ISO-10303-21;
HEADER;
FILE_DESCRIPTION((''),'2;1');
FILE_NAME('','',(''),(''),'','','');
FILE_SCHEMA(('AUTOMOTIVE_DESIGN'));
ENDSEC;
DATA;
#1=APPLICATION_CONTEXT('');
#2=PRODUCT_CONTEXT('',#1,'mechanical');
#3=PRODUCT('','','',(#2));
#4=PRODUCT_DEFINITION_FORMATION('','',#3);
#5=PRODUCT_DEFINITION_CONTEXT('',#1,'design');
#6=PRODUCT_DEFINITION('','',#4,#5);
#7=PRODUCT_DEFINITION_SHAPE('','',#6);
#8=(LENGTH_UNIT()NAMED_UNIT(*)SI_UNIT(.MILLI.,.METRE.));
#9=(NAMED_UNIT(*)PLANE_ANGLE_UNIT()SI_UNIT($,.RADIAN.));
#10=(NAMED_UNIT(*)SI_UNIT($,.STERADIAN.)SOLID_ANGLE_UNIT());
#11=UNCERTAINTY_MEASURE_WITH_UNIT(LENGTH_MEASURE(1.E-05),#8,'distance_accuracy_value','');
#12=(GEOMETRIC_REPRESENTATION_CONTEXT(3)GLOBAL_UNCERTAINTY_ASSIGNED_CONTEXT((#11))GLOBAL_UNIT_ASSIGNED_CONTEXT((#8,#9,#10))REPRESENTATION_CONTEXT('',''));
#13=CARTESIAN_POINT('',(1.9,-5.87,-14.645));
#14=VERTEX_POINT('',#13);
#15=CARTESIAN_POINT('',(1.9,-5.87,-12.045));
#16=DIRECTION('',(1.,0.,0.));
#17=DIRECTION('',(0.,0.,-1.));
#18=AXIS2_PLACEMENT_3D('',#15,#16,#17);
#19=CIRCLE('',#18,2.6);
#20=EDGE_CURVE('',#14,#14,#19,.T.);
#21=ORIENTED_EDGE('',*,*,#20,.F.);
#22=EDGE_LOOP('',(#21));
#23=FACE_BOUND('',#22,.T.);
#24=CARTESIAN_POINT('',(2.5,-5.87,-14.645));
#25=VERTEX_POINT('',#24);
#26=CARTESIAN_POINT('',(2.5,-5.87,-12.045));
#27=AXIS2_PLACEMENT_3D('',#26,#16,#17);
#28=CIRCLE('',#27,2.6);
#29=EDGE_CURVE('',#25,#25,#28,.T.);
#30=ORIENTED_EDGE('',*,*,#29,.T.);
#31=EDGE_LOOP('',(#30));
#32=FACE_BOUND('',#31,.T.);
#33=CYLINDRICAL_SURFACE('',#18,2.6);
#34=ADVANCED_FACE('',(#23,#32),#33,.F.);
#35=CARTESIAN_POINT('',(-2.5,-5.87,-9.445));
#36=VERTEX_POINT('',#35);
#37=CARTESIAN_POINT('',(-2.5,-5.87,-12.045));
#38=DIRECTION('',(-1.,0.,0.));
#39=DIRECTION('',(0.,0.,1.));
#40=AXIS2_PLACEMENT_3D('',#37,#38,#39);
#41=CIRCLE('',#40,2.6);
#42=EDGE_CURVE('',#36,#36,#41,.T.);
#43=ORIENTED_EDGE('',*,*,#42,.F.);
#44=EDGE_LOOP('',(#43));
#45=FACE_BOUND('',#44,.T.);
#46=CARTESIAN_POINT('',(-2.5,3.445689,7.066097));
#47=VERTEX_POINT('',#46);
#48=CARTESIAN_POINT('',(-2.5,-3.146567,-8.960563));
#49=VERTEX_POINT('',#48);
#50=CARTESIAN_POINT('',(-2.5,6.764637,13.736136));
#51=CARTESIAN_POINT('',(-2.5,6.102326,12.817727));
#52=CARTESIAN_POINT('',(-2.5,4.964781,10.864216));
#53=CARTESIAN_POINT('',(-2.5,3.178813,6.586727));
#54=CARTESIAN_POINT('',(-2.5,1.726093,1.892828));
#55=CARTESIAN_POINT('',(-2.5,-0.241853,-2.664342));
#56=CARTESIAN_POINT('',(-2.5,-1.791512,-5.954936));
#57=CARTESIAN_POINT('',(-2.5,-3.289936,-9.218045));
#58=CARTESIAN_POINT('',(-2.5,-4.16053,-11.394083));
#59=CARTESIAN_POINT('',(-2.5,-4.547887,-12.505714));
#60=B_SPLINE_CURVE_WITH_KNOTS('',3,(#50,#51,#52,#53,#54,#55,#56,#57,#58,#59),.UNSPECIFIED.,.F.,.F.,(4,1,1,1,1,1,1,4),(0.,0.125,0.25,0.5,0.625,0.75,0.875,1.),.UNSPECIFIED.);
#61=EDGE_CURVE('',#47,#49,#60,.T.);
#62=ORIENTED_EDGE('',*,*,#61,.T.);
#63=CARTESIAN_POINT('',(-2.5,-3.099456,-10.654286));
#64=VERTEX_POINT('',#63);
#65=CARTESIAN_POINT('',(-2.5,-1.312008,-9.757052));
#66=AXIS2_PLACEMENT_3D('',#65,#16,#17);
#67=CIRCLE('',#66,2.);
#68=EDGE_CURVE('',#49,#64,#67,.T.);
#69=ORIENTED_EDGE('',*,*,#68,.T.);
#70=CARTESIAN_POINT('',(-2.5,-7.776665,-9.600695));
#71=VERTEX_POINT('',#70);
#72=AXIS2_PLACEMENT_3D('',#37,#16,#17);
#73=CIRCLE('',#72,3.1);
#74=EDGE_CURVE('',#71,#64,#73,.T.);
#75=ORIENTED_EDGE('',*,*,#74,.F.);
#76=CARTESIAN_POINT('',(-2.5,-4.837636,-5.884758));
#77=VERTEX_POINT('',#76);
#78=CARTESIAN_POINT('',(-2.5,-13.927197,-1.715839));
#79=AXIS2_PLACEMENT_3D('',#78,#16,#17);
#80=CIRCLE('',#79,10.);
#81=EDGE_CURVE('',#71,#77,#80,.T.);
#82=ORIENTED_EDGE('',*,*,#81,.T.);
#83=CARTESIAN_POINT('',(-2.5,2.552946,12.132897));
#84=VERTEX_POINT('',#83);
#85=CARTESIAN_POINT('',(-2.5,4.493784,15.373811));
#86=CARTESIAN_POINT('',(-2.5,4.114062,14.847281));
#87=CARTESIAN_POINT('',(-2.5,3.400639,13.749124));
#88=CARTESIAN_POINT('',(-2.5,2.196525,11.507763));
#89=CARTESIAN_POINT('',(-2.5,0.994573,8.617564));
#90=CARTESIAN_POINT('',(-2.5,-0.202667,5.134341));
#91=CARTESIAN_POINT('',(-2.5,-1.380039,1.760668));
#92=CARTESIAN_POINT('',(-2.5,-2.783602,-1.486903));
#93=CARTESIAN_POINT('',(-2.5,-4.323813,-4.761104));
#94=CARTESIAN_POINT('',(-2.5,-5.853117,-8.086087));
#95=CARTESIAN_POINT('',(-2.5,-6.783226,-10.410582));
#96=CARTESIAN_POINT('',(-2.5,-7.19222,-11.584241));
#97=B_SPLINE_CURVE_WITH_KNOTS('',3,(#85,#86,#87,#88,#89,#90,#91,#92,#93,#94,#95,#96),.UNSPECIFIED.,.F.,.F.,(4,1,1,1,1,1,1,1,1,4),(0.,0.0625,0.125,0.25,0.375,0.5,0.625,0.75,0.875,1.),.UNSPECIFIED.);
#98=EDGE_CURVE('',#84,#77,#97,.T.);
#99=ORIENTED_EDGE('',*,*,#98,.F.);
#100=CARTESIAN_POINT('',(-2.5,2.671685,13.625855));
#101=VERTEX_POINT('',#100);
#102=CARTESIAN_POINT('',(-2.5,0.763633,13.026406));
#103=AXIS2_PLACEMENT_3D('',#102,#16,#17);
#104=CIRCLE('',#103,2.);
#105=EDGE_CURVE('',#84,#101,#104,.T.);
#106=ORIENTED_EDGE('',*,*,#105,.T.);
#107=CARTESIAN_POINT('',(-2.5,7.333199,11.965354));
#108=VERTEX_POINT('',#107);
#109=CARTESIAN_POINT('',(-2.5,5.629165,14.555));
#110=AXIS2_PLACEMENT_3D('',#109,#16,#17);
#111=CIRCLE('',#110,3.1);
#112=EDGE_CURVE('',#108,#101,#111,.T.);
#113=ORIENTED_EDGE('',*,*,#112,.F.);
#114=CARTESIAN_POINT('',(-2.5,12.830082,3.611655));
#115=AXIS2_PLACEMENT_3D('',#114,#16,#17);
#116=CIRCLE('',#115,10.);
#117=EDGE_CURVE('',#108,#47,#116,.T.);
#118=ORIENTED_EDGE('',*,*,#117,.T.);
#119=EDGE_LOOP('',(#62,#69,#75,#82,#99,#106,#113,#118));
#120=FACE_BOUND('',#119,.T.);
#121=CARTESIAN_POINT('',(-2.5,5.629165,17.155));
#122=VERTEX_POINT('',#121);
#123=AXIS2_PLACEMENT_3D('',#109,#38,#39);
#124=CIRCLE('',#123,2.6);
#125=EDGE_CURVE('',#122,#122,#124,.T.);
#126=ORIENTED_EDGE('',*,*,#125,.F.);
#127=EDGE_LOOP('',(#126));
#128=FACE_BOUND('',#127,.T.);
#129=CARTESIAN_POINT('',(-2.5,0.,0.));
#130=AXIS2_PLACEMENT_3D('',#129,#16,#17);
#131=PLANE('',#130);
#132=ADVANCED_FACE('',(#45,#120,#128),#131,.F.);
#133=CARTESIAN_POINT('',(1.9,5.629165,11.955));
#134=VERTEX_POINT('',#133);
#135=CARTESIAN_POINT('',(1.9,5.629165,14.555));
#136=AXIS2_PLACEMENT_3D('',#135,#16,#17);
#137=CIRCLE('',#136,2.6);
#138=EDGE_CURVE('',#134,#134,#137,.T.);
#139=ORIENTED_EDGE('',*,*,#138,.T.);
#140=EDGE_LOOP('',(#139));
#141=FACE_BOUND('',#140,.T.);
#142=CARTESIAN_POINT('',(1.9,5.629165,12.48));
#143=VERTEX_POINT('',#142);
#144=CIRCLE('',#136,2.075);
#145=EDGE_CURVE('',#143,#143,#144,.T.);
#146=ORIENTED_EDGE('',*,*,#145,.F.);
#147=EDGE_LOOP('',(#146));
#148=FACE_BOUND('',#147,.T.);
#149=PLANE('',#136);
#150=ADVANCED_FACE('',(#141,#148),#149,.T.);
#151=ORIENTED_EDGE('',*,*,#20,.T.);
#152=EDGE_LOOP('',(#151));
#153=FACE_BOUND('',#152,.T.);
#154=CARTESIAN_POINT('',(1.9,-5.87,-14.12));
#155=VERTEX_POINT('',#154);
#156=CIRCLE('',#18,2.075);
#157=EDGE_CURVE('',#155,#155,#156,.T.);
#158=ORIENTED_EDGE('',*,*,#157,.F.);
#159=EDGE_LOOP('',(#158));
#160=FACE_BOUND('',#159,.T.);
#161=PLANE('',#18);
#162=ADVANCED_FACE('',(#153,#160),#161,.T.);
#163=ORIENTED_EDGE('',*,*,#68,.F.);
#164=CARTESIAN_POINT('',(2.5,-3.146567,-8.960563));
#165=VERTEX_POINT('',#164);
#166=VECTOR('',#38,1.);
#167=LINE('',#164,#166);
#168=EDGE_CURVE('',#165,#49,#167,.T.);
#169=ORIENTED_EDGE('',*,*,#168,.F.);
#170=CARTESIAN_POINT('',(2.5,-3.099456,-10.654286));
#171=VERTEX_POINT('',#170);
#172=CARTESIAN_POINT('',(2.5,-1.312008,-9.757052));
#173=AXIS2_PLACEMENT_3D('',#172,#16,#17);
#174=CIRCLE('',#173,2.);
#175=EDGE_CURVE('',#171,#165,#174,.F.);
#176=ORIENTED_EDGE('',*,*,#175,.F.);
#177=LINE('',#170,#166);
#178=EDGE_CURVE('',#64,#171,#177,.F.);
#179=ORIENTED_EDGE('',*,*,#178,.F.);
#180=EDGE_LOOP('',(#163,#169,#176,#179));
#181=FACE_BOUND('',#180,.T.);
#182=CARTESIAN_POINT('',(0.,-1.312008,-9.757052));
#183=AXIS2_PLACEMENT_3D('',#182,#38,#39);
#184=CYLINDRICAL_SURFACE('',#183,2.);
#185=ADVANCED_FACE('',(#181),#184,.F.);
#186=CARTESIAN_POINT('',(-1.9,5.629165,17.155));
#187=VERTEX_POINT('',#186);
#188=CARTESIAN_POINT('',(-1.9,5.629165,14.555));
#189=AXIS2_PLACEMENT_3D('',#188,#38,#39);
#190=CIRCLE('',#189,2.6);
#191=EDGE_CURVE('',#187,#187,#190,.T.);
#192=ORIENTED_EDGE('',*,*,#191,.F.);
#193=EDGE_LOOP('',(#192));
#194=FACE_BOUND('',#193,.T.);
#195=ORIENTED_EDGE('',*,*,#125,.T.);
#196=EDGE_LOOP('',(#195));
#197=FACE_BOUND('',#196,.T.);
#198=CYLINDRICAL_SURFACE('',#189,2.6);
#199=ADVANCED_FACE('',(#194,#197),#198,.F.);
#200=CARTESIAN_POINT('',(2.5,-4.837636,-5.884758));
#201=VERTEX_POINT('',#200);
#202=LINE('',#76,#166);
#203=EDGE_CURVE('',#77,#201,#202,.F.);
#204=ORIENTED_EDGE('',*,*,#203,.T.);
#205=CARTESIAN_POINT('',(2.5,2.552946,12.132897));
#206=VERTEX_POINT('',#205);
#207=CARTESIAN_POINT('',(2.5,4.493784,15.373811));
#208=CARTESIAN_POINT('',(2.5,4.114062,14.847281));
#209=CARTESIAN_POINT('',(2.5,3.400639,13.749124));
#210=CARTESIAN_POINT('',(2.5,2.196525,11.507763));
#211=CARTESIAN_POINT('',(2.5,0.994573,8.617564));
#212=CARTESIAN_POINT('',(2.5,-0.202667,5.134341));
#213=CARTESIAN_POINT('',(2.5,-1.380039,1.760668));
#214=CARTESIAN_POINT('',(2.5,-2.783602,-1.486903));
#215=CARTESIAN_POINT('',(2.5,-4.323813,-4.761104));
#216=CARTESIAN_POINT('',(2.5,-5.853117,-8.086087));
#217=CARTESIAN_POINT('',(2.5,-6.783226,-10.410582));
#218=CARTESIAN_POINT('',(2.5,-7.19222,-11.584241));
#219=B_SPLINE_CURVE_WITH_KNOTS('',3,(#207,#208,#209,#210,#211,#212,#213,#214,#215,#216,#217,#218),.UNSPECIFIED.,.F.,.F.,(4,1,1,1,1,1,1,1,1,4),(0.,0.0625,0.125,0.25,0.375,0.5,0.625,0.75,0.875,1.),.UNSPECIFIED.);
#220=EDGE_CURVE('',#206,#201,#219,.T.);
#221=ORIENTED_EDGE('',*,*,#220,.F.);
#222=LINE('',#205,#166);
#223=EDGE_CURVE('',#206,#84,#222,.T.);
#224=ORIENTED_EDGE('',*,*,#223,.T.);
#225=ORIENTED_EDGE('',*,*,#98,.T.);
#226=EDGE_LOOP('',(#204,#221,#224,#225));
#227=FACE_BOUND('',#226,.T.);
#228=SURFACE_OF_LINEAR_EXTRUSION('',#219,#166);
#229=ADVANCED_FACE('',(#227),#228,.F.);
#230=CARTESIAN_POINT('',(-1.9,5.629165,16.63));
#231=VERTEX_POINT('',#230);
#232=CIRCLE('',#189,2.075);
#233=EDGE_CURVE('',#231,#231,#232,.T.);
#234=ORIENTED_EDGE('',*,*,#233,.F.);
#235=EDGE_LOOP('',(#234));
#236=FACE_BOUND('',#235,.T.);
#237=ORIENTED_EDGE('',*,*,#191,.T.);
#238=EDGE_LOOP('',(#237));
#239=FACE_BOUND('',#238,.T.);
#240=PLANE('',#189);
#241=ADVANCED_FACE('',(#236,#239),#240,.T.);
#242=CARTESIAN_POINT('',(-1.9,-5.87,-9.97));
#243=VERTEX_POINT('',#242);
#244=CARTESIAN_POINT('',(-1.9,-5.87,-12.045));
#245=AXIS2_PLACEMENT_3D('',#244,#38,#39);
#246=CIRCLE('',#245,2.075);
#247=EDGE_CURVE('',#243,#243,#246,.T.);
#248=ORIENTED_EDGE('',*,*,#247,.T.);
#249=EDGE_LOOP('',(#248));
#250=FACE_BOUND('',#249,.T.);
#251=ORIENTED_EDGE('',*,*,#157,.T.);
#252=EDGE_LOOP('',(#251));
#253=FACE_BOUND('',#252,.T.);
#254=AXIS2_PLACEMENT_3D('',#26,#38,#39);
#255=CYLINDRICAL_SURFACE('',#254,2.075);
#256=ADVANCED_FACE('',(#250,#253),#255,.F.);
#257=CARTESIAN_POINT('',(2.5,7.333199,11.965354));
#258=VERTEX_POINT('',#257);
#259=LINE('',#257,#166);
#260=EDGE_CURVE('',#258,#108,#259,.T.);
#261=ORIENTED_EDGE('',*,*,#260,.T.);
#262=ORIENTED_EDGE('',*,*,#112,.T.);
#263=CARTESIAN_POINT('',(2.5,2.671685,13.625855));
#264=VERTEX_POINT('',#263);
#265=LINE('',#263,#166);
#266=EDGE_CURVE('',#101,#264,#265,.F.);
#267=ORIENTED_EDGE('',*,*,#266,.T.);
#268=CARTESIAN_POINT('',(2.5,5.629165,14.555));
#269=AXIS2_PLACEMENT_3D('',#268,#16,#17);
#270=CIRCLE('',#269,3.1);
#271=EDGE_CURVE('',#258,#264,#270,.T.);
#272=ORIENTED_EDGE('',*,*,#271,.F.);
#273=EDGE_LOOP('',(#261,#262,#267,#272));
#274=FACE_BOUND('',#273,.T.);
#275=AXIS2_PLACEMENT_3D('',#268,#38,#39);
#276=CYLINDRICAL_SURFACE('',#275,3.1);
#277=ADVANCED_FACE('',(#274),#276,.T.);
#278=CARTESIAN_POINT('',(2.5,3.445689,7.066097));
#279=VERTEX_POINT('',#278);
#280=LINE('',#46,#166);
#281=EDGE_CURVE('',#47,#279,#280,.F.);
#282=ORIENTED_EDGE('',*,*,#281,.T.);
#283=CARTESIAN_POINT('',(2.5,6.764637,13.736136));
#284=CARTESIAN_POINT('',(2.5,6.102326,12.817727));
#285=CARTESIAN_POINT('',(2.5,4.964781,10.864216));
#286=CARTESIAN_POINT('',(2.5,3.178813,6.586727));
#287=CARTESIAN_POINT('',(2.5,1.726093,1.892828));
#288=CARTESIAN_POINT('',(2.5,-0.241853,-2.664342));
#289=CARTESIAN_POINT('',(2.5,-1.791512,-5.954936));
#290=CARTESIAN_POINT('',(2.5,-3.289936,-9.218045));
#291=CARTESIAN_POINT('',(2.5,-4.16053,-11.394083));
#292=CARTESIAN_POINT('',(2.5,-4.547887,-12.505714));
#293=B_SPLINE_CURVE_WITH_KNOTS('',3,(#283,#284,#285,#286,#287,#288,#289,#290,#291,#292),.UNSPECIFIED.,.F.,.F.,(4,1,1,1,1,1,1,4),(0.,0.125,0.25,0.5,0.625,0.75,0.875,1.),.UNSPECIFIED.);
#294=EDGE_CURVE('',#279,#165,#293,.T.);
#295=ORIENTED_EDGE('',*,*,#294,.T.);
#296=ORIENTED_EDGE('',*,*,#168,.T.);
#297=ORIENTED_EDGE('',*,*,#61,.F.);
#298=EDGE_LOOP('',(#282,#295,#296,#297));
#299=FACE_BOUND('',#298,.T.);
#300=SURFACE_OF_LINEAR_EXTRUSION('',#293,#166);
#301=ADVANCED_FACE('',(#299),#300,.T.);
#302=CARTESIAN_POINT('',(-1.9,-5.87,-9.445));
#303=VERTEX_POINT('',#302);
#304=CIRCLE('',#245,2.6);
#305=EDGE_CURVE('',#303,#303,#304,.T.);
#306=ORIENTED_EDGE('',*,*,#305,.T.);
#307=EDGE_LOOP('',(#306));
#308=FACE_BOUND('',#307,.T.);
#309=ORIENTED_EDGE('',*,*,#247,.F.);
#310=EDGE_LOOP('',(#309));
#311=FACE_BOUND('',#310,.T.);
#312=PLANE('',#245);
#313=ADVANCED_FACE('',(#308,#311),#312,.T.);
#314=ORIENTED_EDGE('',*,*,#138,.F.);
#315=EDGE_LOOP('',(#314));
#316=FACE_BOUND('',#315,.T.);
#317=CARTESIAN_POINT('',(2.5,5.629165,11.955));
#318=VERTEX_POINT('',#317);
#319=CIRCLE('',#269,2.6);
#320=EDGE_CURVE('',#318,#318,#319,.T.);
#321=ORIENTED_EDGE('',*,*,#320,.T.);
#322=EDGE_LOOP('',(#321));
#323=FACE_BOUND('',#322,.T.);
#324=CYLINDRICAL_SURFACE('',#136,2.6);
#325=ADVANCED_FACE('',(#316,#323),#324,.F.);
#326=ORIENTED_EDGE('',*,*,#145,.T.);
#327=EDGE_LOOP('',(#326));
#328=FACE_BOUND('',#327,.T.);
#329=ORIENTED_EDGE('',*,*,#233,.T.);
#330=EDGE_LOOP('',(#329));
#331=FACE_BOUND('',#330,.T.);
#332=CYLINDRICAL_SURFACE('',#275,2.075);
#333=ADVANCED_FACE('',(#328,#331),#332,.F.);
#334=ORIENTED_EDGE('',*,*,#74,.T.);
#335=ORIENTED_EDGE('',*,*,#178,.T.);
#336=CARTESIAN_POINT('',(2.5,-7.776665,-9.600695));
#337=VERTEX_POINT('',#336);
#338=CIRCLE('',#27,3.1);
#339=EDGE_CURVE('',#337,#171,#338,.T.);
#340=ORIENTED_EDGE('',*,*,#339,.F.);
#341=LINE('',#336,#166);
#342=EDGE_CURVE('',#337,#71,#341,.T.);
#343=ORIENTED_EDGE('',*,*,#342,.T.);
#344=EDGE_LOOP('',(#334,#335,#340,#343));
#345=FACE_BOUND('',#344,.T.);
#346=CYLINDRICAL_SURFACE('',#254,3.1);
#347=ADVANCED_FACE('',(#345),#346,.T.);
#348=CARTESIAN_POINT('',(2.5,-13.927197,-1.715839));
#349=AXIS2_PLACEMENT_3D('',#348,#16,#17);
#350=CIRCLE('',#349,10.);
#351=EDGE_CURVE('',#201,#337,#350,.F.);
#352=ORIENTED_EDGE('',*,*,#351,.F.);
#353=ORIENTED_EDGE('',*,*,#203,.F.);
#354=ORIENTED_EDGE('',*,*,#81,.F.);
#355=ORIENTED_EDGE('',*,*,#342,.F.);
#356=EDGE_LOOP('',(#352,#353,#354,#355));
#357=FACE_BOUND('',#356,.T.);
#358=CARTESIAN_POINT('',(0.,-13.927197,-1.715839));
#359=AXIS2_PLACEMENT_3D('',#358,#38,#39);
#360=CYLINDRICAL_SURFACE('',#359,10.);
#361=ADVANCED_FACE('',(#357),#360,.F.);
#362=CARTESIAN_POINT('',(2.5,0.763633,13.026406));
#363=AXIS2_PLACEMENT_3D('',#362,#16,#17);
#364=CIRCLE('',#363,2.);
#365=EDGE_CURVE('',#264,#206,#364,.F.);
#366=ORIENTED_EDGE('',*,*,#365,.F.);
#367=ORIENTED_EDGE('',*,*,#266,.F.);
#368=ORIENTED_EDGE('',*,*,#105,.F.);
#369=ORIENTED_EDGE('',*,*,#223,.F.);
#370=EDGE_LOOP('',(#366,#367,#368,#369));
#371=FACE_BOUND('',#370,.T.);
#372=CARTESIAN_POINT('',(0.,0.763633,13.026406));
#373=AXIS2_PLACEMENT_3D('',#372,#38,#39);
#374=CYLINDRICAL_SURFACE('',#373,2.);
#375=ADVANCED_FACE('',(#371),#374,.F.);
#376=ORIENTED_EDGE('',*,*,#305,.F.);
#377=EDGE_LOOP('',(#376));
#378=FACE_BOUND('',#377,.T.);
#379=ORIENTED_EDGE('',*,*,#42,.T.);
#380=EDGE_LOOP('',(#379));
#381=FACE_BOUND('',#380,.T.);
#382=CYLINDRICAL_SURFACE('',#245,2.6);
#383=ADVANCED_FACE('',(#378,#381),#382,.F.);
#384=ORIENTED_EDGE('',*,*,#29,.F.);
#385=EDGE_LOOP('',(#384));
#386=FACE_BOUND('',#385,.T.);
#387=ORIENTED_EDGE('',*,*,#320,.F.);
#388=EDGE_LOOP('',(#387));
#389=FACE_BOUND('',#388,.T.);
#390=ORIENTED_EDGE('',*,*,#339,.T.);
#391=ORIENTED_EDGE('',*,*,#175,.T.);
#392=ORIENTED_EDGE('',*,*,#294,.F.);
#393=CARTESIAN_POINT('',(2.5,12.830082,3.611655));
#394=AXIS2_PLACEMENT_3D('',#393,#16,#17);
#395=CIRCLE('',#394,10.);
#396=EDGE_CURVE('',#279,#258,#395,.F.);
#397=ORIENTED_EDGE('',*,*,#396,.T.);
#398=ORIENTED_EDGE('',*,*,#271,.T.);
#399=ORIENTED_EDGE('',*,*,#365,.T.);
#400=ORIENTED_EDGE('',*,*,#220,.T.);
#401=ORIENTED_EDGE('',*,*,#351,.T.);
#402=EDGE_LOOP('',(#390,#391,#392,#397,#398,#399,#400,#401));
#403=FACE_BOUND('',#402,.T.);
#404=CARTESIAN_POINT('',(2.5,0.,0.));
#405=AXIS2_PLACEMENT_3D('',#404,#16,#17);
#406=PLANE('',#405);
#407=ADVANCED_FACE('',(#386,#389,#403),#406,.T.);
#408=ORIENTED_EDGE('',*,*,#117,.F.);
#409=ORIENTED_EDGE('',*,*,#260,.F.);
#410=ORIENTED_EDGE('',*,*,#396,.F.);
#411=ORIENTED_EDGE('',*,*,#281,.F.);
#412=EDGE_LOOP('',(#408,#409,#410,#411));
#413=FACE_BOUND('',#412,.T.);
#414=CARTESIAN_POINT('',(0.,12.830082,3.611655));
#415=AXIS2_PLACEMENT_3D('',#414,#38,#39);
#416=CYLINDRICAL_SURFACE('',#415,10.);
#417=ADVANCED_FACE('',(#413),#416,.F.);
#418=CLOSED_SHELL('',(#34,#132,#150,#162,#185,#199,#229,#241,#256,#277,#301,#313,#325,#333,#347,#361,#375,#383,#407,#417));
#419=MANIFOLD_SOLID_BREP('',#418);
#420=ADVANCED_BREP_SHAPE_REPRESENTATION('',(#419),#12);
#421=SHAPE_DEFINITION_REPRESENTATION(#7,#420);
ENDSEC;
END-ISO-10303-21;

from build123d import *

# Parameters (mm, degrees)
BOSS_EXTRUDE1_START     = -2.5
BOSS_EXTRUDE1_OUTLINE_R = 2.075
BOSS_EXTRUDE1_DEPTH     = 5
FILLET1_R               = 10
FILLET2_R               = 2
SKETCH6_R               = 2.6
CUT_EXTRUDE3_DEPTH      = 0.6
CUT_EXTRUDE4_START      = -0.6
SKETCH7_R               = 2.6
CUT_EXTRUDE4_DEPTH      = 0.6


# Read off the part's stored shape, not the designer's step: Boss-Extrude1
with BuildPart() as part:
    # Boss-Extrude1 outline → Boss-Extrude1 (new body)
    with BuildSketch(Plane(origin=(0, 0, 0), x_dir=(0, 0, -1), z_dir=(1, 0, 0)).offset(BOSS_EXTRUDE1_START)):
        with BuildLine():
            add(Edge.make_bspline(
                [(-11.466730601, 5.359735873), (-11.25264516, 5.245467231), (-10.023154699, 4.613615297), (-6.586726751, 3.178813175), (-1.892828151, 1.72609315), (2.664342093, -0.241853498), (5.954936132, -1.791511585), (8.378645161, -2.904482128), (9.714889181, -3.469566052), (9.963523485, -3.57272868)],
                knots=[0.098312483, 0.098312483, 0.098312483, 0.098312483, 0.125, 0.25, 0.5, 0.625, 0.75, 0.875, 0.903535222, 0.903535222, 0.903535222, 0.903535222], degree=3))
            ThreePointArc((-11.466730601, 5.359735873), (-17.18709042, 7.266876949), (-12.948862581, 2.977689575))
            add(Edge.make_bspline(
                [(-12.948862581, 2.977689575), (-12.654908429, 2.818079718), (-11.233080684, 2.082292793), (-8.617564406, 0.994573419), (-5.134340834, -0.202666732), (-1.7606679, -1.38003851), (1.486902599, -2.78360156), (4.761104026, -4.323813239), (7.2522862, -5.469616162), (8.677110193, -6.070847079), (8.961386544, -6.18832068)],
                knots=[0.09219974, 0.09219974, 0.09219974, 0.09219974, 0.125, 0.25, 0.375, 0.5, 0.625, 0.75, 0.875, 0.905961816, 0.905961816, 0.905961816, 0.905961816], degree=3))
            ThreePointArc((8.961386544, -6.18832068), (14.939800335, -6.979112718), (9.963523485, -3.57272868))
        make_face()
        with Locations((12.045, -5.87)):
            Circle(BOSS_EXTRUDE1_OUTLINE_R, mode=Mode.SUBTRACT)
        with Locations((-14.555, 5.629165125)):
            Circle(BOSS_EXTRUDE1_OUTLINE_R, mode=Mode.SUBTRACT)
    extrude(amount=BOSS_EXTRUDE1_DEPTH)

    # Fillet1
    fillet1_edges = [part.edges().sort_by_distance(p)[0] for p in [
        (0, -6.18832068, -8.961386544),
        (0, 5.359735873, 11.466730601),
    ]]
    fillet(fillet1_edges, radius=FILLET1_R)

    # Fillet2
    fillet2_edges = [part.edges().sort_by_distance(p)[0] for p in [
        (0, -3.57272868, -9.963523485),
        (0, 2.977689575, 12.948862581),
    ]]
    fillet(fillet2_edges, radius=FILLET2_R)

    # Sketch6 → Cut-Extrude3 (cut)
    with BuildSketch(Plane(origin=(2.5, 0, 0), x_dir=(0, 0, -1), z_dir=(1, 0, 0))):
        with Locations((-14.555, 5.629165125)):
            Circle(SKETCH6_R)
        with Locations((12.045, -5.87)):
            Circle(SKETCH6_R)
    extrude(amount=-CUT_EXTRUDE3_DEPTH, mode=Mode.SUBTRACT)

    # Sketch7 → Cut-Extrude4 (cut)
    with BuildSketch(Plane.ZY.offset(2.5).offset(CUT_EXTRUDE4_START)):
        with Locations(Location((14.555, 5.629165125, 0), (0, 0, 180))):
            Circle(SKETCH7_R)
        with Locations(Location((-12.045, -5.87, 0), (0, 0, 180))):
            Circle(SKETCH7_R)
    extrude(amount=CUT_EXTRUDE4_DEPTH, mode=Mode.SUBTRACT)


solid = part.part
